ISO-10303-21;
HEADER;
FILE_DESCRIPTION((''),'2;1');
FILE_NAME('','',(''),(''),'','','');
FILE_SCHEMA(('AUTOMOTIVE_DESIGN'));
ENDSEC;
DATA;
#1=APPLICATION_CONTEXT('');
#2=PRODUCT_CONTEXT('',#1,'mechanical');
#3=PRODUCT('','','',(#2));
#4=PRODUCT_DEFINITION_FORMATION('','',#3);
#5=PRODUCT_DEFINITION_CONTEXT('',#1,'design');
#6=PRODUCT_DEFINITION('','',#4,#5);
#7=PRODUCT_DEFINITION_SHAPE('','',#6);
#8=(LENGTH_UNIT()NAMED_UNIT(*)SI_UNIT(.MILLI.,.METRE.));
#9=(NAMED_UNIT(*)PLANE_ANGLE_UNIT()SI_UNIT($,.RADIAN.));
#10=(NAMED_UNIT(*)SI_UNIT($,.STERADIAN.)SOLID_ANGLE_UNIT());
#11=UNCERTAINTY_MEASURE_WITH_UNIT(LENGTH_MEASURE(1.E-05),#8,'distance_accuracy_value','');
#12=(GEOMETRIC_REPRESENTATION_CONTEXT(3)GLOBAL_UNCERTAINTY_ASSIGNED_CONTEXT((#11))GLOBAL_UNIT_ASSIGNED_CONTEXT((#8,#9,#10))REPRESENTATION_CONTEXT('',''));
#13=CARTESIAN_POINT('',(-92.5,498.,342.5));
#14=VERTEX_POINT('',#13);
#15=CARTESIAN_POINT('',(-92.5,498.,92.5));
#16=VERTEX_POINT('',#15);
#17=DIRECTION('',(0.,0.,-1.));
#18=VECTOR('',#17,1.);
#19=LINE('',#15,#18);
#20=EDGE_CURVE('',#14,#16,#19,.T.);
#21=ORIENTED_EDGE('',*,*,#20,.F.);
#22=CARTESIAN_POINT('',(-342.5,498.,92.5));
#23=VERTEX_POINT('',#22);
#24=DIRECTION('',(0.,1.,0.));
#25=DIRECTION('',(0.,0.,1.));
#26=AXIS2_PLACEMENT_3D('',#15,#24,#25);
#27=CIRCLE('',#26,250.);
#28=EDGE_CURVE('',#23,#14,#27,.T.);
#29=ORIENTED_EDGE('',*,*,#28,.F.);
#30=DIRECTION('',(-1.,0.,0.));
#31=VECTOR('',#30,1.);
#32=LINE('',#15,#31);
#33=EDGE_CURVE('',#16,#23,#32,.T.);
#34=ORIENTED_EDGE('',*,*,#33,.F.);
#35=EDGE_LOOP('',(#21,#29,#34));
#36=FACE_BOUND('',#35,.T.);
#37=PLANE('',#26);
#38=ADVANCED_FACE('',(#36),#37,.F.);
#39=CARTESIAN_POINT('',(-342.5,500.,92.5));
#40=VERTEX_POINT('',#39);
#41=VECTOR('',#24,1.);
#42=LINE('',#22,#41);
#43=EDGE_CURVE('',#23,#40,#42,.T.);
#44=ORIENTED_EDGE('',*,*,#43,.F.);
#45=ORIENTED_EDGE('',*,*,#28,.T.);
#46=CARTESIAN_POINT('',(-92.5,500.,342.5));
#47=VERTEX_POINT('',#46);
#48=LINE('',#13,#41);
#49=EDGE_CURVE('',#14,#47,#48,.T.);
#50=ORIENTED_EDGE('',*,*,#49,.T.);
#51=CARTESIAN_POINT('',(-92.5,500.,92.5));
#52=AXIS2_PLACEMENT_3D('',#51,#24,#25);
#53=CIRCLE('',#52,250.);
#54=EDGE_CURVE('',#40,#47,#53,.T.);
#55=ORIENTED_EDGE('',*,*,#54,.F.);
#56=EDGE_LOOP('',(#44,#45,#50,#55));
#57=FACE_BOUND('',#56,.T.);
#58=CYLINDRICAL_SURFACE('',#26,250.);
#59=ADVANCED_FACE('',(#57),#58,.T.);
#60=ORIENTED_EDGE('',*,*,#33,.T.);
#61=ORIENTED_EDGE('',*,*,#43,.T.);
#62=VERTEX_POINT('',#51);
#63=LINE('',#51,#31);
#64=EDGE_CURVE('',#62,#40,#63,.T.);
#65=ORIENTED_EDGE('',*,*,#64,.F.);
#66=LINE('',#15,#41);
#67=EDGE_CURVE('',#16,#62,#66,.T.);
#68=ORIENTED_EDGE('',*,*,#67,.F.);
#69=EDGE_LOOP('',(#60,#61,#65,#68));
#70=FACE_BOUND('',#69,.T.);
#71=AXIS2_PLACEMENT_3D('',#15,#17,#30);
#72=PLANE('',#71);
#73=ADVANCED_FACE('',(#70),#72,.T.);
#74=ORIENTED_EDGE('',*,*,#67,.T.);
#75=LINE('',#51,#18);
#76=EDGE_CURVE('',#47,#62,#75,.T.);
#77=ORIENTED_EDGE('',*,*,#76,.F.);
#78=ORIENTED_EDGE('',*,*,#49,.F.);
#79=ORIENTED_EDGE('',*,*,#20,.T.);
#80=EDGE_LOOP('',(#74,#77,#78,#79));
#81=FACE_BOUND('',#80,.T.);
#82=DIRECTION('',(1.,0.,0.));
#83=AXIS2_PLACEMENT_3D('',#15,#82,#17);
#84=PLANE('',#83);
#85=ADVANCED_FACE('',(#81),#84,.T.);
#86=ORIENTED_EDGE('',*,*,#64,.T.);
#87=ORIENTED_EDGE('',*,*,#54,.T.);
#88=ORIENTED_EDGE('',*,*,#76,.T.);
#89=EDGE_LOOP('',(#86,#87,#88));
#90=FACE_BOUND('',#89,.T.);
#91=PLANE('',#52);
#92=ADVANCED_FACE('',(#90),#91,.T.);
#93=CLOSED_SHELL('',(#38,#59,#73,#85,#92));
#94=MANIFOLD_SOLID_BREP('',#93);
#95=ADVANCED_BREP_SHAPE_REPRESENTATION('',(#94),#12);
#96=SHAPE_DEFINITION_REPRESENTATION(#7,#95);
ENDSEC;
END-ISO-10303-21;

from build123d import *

# Parameters (mm, degrees)
SM_BASE_FLANGE_2_DEPTH = 2


# Sheet-metal steps are written as plain solids
with BuildPart() as part:
    # 草图4 → 基体-法兰2 (new body)
    with BuildSketch(Plane(origin=(0, 500, 0), x_dir=(1, 0, 0), z_dir=(0, 1, 0))):
        with BuildLine():
            Line((-92.5, -92.5), (-342.5, -92.5))
            ThreePointArc((-342.5, -92.5), (-269.276695297, -269.276695297), (-92.5, -342.5))
            Line((-92.5, -342.5), (-92.5, -92.5))
        make_face()
    extrude(amount=-SM_BASE_FLANGE_2_DEPTH)


solid = part.part
